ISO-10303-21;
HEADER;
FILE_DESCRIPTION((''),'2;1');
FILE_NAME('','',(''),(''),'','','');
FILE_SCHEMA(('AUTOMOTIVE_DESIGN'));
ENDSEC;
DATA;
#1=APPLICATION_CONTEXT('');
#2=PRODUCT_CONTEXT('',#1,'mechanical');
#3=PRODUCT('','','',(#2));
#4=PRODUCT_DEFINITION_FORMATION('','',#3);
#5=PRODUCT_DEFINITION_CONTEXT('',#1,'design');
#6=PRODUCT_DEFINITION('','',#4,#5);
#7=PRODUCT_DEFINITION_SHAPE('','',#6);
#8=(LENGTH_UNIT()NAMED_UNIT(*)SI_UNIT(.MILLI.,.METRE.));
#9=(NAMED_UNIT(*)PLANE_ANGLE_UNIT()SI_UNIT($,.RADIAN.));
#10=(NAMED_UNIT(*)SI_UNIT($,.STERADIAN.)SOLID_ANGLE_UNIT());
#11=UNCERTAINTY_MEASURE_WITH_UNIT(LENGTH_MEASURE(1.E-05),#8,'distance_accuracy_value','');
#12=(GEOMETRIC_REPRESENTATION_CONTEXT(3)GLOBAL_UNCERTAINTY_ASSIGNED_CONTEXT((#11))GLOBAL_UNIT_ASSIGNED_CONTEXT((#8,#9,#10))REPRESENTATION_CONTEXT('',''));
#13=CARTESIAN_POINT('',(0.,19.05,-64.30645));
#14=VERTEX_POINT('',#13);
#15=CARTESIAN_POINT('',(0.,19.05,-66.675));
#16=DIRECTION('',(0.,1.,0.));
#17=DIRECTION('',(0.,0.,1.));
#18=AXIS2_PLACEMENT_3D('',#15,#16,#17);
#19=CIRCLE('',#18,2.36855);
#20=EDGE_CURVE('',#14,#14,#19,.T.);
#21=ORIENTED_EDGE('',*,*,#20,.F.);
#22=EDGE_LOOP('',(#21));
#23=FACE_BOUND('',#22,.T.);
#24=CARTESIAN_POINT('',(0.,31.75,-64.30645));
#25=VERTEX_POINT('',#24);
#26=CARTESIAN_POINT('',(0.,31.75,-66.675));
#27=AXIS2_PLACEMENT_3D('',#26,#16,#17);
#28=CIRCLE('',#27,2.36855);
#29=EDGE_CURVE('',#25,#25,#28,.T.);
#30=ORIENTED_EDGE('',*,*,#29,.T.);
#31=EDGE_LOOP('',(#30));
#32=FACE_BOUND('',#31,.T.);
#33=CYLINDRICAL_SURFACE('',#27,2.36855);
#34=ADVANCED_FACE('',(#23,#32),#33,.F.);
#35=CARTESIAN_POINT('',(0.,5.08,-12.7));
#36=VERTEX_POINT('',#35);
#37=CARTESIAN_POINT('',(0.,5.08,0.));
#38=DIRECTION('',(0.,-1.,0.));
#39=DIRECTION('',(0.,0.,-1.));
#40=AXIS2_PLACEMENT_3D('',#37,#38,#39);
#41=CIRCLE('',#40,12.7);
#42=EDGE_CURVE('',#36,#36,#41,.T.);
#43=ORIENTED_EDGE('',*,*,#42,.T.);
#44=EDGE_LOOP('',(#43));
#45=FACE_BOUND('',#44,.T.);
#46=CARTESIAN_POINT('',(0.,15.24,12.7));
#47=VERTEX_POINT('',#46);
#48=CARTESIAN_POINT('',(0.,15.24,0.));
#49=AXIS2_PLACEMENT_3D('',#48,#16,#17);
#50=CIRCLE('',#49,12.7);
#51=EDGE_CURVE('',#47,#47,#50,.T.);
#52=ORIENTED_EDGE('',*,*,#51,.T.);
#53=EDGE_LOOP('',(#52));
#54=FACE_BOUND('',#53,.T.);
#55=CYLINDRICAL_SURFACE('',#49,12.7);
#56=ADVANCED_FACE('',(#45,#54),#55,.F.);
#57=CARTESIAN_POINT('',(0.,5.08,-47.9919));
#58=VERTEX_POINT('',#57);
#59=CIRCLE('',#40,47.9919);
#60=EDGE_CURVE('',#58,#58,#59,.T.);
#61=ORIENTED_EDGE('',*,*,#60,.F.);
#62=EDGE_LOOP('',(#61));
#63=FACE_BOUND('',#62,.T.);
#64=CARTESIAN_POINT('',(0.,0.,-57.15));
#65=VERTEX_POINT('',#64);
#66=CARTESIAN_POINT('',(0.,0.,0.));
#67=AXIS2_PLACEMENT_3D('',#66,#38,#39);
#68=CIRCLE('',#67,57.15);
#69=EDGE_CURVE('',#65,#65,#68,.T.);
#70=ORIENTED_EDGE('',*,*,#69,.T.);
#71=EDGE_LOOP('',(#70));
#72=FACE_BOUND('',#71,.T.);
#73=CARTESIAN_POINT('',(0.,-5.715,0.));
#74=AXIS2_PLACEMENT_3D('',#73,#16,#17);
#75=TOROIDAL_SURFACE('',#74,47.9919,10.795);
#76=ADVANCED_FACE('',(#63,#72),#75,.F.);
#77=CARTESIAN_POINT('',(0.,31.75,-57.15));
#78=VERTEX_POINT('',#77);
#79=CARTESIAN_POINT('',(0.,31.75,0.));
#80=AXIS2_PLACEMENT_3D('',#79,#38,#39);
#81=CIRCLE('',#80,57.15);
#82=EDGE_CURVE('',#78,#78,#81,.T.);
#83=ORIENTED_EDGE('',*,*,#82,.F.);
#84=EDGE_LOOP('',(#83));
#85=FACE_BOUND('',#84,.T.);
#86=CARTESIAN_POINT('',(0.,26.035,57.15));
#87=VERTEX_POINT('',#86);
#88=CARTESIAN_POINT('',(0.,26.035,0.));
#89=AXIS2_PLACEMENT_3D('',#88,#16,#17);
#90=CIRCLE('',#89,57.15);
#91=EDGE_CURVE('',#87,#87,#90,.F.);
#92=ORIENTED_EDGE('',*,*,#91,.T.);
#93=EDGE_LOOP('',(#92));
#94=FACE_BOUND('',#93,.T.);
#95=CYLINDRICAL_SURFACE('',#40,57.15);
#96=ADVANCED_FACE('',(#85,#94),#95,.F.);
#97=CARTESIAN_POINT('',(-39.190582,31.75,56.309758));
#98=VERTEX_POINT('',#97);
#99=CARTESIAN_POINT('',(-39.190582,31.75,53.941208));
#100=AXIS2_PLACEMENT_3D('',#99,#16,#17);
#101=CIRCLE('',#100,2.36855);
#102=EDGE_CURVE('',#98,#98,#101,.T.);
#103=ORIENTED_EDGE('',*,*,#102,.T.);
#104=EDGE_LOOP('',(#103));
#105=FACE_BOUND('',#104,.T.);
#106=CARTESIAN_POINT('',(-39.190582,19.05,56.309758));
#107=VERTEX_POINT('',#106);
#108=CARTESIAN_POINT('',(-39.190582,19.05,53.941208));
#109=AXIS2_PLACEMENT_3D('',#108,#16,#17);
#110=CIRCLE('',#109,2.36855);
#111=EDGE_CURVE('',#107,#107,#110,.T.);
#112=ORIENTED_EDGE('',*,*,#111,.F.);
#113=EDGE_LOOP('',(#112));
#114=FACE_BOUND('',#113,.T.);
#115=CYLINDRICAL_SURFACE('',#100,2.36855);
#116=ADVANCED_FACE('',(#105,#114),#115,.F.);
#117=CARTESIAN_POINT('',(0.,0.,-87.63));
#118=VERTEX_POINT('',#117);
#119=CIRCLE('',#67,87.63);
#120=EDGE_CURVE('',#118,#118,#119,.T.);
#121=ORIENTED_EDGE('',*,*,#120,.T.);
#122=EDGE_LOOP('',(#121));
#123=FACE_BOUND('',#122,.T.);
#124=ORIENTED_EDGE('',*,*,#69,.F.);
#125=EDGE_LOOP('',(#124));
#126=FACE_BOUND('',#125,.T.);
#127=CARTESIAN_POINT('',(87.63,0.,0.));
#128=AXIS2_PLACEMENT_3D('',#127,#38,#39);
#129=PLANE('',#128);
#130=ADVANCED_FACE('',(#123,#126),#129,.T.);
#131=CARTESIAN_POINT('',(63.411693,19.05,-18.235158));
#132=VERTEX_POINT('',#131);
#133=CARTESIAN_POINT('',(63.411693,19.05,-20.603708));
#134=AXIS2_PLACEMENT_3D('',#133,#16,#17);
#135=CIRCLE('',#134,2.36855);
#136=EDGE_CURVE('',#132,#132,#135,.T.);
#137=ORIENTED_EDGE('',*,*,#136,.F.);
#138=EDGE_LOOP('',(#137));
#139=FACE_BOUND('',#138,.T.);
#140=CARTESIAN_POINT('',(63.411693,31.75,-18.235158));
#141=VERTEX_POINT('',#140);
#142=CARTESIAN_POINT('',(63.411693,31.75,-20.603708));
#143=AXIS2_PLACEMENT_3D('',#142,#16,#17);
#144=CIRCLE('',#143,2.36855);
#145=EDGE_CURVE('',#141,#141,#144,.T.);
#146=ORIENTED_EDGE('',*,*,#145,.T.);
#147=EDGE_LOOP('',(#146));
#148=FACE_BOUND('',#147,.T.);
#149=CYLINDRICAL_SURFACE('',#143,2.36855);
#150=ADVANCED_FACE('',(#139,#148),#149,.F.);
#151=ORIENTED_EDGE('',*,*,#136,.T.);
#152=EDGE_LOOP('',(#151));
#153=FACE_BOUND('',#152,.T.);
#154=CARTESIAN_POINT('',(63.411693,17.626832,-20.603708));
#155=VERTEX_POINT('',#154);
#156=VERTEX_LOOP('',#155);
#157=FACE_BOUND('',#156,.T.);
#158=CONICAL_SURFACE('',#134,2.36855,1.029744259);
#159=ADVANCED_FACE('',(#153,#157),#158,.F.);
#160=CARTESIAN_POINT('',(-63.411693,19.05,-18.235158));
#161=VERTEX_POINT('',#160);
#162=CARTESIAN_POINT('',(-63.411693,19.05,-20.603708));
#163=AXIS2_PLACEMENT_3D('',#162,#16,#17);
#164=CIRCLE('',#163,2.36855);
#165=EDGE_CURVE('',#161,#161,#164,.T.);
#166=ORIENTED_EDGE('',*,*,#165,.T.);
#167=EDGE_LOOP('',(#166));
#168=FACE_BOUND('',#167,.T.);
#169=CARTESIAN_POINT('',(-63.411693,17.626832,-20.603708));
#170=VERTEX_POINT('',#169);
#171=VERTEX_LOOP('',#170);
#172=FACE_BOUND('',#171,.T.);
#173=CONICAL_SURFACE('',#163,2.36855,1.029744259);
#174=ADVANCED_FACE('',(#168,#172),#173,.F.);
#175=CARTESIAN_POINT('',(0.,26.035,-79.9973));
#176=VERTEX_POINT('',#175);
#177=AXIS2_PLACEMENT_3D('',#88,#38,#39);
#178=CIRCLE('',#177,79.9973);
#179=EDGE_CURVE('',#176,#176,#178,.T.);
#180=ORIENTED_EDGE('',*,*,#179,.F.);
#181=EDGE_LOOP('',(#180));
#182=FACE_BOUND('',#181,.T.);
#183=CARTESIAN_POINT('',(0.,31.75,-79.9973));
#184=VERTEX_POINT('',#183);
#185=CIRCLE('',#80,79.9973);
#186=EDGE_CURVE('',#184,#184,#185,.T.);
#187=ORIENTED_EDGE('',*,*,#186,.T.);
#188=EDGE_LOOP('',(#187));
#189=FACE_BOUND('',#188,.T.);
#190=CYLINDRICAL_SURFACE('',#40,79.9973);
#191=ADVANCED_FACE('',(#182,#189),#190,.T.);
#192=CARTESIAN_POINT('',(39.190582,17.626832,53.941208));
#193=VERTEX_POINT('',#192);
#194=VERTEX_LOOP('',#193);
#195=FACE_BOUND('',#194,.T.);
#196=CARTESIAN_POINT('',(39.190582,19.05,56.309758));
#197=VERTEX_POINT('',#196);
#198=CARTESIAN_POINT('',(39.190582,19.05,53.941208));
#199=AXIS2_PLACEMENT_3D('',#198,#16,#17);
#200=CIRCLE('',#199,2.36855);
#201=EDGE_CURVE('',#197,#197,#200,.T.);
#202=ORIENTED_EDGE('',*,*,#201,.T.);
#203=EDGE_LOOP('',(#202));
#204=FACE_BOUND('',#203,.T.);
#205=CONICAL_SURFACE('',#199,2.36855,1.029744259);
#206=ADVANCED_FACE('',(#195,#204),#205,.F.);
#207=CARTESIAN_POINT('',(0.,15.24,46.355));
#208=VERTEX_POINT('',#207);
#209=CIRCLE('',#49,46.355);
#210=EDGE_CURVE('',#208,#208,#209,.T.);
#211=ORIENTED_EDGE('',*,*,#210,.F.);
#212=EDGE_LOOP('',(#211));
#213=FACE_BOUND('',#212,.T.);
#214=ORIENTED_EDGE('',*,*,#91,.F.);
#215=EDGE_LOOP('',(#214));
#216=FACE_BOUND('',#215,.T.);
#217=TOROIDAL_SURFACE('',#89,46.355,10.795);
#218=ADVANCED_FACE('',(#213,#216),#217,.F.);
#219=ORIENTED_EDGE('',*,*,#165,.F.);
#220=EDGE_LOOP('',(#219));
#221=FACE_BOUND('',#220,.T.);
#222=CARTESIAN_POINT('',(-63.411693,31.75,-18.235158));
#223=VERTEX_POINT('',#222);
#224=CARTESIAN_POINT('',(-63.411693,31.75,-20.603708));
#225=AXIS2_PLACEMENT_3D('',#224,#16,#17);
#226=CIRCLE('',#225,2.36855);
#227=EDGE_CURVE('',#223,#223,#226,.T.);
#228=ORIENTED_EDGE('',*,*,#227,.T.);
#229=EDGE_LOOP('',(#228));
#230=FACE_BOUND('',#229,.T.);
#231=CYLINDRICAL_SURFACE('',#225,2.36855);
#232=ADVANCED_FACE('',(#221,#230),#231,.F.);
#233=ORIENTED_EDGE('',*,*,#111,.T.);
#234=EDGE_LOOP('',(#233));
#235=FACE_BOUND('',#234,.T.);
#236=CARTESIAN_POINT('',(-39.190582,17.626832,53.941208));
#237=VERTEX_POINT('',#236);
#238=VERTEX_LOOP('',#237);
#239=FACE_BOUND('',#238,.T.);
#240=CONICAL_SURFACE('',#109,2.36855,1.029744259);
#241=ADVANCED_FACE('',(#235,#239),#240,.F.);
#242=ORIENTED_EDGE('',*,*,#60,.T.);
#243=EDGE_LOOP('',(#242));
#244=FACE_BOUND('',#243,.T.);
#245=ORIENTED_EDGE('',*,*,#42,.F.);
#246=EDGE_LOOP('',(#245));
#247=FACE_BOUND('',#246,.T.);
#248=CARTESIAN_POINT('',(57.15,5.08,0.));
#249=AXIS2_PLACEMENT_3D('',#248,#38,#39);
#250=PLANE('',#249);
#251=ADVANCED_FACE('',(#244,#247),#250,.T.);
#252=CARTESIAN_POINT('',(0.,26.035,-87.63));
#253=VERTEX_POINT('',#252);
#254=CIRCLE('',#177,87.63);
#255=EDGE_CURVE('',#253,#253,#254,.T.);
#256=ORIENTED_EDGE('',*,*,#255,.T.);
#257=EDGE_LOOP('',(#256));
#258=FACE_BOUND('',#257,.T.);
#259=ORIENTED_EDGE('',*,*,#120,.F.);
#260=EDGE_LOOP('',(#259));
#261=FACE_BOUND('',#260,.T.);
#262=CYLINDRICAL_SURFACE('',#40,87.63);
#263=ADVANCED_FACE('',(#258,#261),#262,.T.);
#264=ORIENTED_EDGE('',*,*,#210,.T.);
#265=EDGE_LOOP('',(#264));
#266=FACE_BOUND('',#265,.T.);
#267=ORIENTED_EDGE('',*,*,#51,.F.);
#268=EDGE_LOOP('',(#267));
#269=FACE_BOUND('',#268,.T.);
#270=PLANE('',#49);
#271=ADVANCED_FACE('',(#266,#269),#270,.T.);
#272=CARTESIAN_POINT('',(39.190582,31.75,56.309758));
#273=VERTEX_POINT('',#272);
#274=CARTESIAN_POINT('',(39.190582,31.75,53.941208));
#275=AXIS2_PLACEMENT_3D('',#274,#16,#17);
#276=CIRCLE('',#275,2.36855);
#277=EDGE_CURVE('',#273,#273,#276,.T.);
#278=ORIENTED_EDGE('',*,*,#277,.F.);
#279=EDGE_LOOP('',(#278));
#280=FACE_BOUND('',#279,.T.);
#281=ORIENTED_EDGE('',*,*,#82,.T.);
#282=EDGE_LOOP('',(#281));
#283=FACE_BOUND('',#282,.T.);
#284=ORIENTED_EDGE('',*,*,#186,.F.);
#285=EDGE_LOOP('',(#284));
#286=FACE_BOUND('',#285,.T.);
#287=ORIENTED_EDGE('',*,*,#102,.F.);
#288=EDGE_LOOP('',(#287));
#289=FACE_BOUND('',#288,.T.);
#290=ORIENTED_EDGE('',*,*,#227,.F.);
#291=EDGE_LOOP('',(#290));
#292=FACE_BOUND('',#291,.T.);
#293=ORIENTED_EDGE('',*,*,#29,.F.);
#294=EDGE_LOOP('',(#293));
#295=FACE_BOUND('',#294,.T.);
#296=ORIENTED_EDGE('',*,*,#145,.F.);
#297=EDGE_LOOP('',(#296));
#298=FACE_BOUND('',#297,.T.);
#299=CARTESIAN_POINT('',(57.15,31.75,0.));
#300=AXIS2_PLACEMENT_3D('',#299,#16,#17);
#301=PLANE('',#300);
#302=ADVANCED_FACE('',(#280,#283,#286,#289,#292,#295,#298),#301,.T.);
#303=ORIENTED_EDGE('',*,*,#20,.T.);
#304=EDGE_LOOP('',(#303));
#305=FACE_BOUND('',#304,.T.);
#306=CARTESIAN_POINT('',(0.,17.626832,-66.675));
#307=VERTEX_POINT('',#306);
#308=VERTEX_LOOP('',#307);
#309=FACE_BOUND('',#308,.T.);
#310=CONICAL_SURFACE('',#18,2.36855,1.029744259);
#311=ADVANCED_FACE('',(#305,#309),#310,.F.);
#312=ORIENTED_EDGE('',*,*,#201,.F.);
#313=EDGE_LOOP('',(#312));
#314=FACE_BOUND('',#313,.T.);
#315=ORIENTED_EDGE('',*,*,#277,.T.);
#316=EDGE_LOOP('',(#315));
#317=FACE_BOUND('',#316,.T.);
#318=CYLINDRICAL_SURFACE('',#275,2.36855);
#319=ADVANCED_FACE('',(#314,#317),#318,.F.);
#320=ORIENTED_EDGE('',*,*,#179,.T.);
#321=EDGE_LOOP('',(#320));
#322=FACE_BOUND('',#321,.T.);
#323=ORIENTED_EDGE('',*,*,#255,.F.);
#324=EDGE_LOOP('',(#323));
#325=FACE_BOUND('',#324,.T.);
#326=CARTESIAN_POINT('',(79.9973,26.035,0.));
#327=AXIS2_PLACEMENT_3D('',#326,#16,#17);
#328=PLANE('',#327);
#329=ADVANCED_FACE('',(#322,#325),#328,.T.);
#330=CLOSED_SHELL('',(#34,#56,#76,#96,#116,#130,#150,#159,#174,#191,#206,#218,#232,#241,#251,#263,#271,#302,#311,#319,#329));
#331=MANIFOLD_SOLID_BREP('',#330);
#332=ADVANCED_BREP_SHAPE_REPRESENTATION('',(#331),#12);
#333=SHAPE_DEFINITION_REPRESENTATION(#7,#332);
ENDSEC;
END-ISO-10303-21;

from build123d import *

# Parameters (mm, degrees)
F_1_1_DIAMETER_HOLE1_D = 25.4
CIRPATTERN1_COUNT      = 5
FILLET2_R              = 10.795


with BuildPart() as part:
    # Sketch1 → Revolve1 (revolve)
    with BuildSketch(Plane.XY, mode=Mode.PRIVATE) as revolve1_sk:
        Polygon((87.63, 0), (57.15, 0), (57.15, 5.08), (0, 5.08), (0, 15.24), (57.15, 15.24), (57.15, 31.75), (79.9973, 31.75), (79.9973, 26.035), (87.63, 26.035), align=None)
    revolve(revolve1_sk.sketch.rotate(Axis((0, 5.08, 0), (0, 1, 0)), 90), axis=Axis((0, 5.08, 0), (0, 1, 0)))

    # 1 (1) Diameter Hole1 (through all)
    with Locations(Plane(origin=(0, 15.24, 0), x_dir=(1, 0, 0), z_dir=(0, 1, 0))):
        with Locations((0, 0)):
            Hole(F_1_1_DIAMETER_HOLE1_D / 2)

    # Sketch7 → 3/16 (0.1865) Dowel Hole1 (revolve, cut)
    with BuildSketch(Plane(origin=(0, 31.75, -66.675), x_dir=(0, 0, 1), z_dir=(1, 0, 0))):
        Polygon((0, 0), (0, 14.123168419), (2.36855, 12.7), (2.36855, 0), align=None)
    f_3_16_0_1865_dowel_hole1 = revolve(axis=Axis((0, 38.1, -66.675), (0, -1, 0)), mode=Mode.SUBTRACT)

    # CirPattern1: 3/16 (0.1865) Dowel Hole1 ×5 about axis
    cirpattern1_axis = Axis((0, 0, 0), (0, 1, 0))
    for i in range(1, CIRPATTERN1_COUNT):
        add(f_3_16_0_1865_dowel_hole1.rotate(cirpattern1_axis, i * 360 / CIRPATTERN1_COUNT), mode=Mode.SUBTRACT)

    # Fillet2
    # the kernel refuses this fillet: 10.795 mm, written as the material it adds along each edge
    with BuildSketch(Plane(origin=(0, 5.08, 0), x_dir=(0, 0, -1), z_dir=(1, 0, 0))) as fillet2_piece_1:
        with BuildLine():
            CenterArc((47.99189976, -10.795), FILLET2_R, 31.965718751, 58.034281249)
            Line((47.99189976, 0), (47.99189976, 0.2159))
            Line((47.99189976, 0.2159), (57.15, 0.2159))
            Line((57.15, 0.2159), (57.3659, 0))
            ThreePointArc((57.3659, 0), (57.3659, -2.54), (57.333162005, -4.9657))
            Line((57.333162005, -4.9657), (57.15, -5.08))
        make_face()
    revolve(axis=Axis((0, 5.08, 0), (0, 1, 0)))
    with BuildSketch(Plane(origin=(0, 15.24, 0), x_dir=(0, 0, -1), z_dir=(1, 0, 0))) as fillet2_piece_2:
        with BuildLine():
            CenterArc((57.15 - FILLET2_R, FILLET2_R), FILLET2_R, 270, 90)
            Line((57.15, FILLET2_R), (57.15 + FILLET2_R * 0.02, FILLET2_R))
            Line((57.15 + FILLET2_R * 0.02, FILLET2_R), (57.15 + FILLET2_R * 0.02, -FILLET2_R * 0.02))
            Line((57.15 + FILLET2_R * 0.02, -FILLET2_R * 0.02), (57.15 - FILLET2_R, -FILLET2_R * 0.02))
            Line((57.15 - FILLET2_R, -FILLET2_R * 0.02), (57.15 - FILLET2_R, 0))
        make_face()
    revolve(axis=Axis((0, 15.24, 0), (0, 1, 0)))


solid = part.part
